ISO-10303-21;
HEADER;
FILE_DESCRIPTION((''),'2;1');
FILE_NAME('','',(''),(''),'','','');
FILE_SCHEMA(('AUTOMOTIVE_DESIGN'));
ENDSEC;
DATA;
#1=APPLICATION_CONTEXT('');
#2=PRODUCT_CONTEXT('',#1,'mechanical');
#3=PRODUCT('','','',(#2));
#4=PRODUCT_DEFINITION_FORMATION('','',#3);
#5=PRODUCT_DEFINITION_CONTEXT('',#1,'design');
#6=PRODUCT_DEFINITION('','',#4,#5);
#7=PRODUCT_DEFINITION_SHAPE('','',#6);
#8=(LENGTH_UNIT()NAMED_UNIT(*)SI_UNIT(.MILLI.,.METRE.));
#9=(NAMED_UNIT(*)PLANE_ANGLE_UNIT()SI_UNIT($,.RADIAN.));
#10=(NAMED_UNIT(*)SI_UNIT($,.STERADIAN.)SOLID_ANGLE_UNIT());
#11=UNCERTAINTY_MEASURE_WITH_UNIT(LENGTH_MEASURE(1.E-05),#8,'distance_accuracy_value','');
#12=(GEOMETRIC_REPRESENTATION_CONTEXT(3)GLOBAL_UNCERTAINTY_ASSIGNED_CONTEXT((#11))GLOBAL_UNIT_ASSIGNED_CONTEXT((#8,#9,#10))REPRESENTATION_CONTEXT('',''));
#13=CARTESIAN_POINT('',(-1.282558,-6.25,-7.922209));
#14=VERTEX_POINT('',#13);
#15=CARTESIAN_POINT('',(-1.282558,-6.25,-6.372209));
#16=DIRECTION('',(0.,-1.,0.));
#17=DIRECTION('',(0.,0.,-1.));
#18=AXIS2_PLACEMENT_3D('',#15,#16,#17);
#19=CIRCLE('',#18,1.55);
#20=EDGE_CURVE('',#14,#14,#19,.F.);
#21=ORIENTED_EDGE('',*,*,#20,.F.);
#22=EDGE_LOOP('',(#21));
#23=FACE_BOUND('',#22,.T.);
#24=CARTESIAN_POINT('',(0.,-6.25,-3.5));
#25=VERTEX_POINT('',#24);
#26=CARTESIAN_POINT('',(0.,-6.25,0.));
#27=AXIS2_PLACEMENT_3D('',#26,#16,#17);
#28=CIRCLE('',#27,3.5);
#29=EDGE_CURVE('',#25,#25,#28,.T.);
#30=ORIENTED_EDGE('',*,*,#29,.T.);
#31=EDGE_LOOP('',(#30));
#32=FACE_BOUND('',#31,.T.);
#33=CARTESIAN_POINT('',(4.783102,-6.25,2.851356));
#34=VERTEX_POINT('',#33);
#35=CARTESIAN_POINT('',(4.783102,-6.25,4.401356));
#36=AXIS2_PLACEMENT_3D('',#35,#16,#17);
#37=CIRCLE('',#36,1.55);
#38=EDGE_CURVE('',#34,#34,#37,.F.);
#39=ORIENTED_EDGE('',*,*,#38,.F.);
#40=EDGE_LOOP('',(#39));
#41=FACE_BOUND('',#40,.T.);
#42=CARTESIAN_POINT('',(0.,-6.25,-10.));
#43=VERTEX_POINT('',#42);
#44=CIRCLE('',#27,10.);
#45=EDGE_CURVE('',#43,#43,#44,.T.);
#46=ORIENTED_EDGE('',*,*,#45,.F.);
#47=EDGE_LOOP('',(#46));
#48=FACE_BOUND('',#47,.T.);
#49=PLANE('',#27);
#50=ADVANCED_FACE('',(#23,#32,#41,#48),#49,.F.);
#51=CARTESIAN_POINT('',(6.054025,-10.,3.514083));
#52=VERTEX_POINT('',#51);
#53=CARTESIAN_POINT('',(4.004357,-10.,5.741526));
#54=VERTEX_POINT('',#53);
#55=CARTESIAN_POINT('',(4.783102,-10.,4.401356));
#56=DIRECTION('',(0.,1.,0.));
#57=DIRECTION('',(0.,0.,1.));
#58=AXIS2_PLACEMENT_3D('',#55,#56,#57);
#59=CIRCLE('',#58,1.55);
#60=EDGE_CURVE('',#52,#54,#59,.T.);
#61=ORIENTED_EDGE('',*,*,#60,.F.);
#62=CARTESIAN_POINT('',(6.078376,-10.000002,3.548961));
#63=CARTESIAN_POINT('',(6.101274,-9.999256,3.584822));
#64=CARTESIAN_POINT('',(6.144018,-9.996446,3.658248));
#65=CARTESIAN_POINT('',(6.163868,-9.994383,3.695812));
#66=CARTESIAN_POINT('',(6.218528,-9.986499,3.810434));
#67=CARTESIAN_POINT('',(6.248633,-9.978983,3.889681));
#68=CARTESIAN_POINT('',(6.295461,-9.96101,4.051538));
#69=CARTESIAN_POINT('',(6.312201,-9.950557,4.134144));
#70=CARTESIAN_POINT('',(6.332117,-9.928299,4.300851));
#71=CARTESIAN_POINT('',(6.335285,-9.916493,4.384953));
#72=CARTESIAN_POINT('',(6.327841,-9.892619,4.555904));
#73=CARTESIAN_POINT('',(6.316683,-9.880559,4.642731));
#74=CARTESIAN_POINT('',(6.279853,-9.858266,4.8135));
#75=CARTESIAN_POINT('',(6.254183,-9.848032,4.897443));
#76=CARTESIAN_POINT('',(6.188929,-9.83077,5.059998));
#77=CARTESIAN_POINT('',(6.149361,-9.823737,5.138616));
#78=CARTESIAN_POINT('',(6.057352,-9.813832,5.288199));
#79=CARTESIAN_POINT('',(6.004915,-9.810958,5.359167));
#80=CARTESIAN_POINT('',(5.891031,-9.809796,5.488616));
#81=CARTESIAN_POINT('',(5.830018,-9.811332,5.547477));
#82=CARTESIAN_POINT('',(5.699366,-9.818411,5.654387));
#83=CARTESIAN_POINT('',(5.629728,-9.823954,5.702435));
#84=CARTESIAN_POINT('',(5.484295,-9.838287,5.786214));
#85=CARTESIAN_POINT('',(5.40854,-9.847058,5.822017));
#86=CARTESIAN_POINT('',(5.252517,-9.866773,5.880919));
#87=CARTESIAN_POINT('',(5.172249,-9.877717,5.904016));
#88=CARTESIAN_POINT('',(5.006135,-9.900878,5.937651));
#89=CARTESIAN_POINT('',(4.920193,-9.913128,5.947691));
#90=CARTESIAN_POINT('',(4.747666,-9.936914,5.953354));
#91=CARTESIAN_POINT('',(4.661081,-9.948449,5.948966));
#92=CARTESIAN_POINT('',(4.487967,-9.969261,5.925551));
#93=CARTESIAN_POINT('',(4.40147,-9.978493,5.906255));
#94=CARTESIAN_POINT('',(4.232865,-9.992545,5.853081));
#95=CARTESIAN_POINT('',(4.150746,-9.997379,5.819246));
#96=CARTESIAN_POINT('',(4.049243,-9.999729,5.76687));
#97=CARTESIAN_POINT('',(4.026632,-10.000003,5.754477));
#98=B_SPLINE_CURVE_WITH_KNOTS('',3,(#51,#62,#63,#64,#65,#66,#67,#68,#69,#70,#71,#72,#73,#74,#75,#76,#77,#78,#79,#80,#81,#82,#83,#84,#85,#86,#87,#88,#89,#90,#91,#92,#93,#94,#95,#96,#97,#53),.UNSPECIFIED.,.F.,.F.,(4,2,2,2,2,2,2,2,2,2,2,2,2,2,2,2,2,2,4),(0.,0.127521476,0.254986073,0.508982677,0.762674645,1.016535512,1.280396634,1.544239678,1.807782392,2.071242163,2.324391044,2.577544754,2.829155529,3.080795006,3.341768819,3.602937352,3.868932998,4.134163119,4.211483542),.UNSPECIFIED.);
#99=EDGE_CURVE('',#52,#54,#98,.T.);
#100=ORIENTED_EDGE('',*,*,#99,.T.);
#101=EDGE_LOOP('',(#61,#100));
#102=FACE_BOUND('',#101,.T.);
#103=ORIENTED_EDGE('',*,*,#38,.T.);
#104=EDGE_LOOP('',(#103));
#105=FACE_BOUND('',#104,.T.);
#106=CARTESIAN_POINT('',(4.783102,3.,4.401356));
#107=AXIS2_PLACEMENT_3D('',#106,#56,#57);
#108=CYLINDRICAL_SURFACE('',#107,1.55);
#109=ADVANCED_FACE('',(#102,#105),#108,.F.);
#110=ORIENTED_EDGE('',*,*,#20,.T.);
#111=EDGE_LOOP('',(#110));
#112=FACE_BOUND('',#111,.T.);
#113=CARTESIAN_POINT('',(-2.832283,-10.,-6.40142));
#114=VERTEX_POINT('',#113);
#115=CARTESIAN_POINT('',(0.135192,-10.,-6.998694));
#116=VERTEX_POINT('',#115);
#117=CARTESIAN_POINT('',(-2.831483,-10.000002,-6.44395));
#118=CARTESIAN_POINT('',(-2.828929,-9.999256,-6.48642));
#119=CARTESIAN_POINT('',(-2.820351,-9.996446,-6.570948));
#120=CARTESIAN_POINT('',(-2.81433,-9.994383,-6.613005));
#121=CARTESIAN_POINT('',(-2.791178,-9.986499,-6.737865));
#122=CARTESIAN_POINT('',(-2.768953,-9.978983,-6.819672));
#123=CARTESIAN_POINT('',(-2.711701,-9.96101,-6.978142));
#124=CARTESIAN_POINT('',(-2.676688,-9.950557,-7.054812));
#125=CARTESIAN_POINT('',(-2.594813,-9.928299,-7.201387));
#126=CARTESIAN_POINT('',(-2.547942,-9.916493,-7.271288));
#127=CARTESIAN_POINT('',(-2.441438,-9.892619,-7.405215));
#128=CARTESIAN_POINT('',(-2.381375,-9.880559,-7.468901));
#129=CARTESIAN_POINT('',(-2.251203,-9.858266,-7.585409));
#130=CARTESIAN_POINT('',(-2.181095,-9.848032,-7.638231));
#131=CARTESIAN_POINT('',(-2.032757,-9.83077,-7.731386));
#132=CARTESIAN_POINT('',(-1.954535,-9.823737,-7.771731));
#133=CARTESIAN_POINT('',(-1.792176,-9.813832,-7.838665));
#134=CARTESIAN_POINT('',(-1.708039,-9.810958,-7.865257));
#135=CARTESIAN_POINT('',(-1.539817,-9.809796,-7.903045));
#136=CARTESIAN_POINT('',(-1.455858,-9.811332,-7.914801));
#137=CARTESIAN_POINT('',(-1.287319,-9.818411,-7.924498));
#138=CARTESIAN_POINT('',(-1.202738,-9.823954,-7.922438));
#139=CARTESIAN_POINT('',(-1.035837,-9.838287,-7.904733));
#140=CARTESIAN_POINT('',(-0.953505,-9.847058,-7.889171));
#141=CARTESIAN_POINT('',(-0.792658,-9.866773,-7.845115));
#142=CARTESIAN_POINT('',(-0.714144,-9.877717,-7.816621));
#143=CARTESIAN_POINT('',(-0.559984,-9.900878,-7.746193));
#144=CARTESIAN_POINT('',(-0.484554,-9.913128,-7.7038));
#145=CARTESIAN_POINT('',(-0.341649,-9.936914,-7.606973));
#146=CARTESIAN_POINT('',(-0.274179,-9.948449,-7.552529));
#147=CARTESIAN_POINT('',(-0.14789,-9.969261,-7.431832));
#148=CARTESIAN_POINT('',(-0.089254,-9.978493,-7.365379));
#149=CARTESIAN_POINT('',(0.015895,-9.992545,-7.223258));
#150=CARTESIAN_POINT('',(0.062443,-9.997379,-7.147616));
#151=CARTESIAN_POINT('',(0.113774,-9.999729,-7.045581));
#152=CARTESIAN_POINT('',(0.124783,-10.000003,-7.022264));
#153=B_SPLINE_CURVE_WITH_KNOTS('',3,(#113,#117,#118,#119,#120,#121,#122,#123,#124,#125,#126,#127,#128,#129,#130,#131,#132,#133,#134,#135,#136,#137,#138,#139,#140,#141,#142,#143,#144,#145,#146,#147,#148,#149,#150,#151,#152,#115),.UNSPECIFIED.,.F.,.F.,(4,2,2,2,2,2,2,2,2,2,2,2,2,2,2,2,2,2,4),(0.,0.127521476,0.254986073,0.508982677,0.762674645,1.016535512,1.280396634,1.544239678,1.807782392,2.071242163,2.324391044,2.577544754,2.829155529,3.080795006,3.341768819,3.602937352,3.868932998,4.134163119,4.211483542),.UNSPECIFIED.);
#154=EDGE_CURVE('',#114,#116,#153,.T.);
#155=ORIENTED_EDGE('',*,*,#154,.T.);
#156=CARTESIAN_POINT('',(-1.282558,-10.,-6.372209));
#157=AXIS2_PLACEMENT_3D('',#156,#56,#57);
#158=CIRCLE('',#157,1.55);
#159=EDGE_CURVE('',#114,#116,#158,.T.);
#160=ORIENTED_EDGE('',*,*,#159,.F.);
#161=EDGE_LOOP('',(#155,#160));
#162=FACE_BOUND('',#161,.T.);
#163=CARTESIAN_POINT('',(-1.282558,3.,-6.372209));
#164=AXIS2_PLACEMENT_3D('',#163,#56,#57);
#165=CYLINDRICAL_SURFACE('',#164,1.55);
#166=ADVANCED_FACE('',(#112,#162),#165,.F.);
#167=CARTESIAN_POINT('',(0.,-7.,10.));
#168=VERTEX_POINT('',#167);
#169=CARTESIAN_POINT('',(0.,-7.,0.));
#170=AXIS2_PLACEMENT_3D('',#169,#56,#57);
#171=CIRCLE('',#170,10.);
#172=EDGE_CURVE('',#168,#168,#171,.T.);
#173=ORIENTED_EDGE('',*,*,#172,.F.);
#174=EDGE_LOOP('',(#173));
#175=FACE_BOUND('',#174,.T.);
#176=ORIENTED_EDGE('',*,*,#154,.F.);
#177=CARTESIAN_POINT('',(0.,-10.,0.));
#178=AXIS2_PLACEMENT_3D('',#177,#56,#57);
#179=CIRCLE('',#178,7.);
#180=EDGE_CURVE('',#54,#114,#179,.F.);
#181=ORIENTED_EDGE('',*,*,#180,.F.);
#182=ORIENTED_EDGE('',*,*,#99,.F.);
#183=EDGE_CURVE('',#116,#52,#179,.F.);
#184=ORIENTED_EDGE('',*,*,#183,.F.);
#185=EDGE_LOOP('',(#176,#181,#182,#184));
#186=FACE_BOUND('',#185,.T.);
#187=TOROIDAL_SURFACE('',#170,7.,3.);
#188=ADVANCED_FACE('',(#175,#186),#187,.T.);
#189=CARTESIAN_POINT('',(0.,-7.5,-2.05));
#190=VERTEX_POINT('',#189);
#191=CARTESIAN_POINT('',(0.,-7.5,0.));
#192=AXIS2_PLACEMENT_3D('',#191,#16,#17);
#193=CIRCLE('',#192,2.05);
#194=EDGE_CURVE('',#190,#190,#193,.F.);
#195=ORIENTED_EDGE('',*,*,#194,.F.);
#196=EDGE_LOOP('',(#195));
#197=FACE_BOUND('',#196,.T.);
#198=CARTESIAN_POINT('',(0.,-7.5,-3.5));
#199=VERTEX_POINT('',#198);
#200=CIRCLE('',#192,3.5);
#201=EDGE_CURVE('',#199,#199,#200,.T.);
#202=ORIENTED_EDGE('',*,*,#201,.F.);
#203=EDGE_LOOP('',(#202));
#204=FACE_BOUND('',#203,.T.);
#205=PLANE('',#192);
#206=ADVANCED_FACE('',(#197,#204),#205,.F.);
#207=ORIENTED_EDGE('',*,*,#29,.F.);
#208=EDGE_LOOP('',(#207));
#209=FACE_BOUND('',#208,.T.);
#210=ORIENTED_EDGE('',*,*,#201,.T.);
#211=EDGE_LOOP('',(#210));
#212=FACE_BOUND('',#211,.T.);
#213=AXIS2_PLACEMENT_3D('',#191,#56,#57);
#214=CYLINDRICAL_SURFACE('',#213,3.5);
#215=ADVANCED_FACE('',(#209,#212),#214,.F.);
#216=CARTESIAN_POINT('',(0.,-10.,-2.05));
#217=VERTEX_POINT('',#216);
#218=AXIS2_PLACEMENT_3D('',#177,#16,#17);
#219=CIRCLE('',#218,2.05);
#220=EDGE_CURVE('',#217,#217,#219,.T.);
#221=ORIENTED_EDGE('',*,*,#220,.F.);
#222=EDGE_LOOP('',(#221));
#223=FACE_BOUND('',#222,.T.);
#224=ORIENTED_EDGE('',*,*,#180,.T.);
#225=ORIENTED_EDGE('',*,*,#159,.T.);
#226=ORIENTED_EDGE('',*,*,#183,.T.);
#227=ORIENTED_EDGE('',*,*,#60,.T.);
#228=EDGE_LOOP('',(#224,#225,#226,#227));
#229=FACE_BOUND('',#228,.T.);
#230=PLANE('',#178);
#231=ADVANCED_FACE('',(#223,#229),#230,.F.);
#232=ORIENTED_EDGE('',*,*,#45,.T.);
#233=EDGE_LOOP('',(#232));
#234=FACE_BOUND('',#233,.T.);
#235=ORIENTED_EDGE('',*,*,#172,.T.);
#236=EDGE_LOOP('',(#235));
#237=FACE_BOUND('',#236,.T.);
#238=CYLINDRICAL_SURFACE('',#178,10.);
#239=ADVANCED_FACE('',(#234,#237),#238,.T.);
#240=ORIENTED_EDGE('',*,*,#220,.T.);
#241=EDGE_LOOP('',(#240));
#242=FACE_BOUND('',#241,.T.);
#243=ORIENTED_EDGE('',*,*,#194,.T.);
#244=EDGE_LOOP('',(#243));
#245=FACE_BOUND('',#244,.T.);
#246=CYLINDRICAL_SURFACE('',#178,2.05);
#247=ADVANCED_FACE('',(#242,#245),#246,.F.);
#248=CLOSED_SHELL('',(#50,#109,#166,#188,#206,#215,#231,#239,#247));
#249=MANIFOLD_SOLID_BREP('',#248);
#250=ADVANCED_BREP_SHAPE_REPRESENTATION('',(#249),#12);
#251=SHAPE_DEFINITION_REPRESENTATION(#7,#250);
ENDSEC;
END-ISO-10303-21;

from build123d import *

# Parameters (mm, degrees)
BOSS_EXTRUDE1_DEPTH        = 3
BOSS_EXTRUDE1_DEPTH_BACK   = 10
SKETCH1_R                  = 10
SKETCH4_R                  = 1.5
HOLE_DEPTH                 = 20.973741561
HOLECIR_COUNT              = 5
SKETCH6_R                  = 3.5
BEARINGHOLE_DEPTH          = 2.5
SKETCH7_R                  = 2.05
SHAFTHOLE_DEPTH            = 17.248076982
F_3_1_3_1_DIAMETER_HOLE1_D = 3.1
FILLET2_R                  = 3
SKETCH11_R                 = 10
CUT_EXTRUDE1_DEPTH         = 10


with BuildPart() as part:
    # Sketch1 → Boss-Extrude1 (new, two sides: drawn at the far end of the back side and taken through both)
    with BuildSketch(Plane(origin=(0, 0, 0), x_dir=(1, 0, 0), z_dir=(0, 1, 0)).offset(-BOSS_EXTRUDE1_DEPTH_BACK)):
        with Locations(Location((0, 0, 0), (0, 0, 270))):
            Circle(SKETCH1_R)
    extrude(amount=BOSS_EXTRUDE1_DEPTH + BOSS_EXTRUDE1_DEPTH_BACK)

    # Sketch4 → hole (cut, through all)
    with BuildSketch(Plane(origin=(-3.352872105, -1.093066116, 1.887711608), x_dir=(-0.4486862613641547, -0.14627571033740308, -0.8816371449912632), z_dir=(0.8382180262940947, 0.2732665289126682, -0.47192790187872385))):
        with Locations(Location((0, 0, 0), (0, 0, 8.746528197))):
            Circle(SKETCH4_R)
    hole = extrude(amount=-HOLE_DEPTH, mode=Mode.SUBTRACT)

    # holecir: hole ×5 about axis
    holecir_axis = Axis((0, 0, 0), (0, 1, 0))
    for i in range(1, HOLECIR_COUNT):
        add(hole.rotate(holecir_axis, i * 360 / HOLECIR_COUNT), mode=Mode.SUBTRACT)

    # Sketch6 → bearinghole (cut)
    with BuildSketch(Plane(origin=(0, -5, 0), x_dir=(-1, 0, 0), z_dir=(0, -1, 0))):
        with Locations(Location((0, 0, 0), (0, 0, 90))):
            Circle(SKETCH6_R)
    extrude(amount=BEARINGHOLE_DEPTH, mode=Mode.SUBTRACT)

    # Sketch7 → shafthole (cut, through all)
    with BuildSketch(Plane(origin=(0, -5, 0), x_dir=(-1, 0, 0), z_dir=(0, -1, 0))):
        with Locations(Location((0, 0, 0), (0, 0, 90))):
            Circle(SKETCH7_R)
    extrude(amount=SHAFTHOLE_DEPTH, mode=Mode.SUBTRACT)

    # Ø3.1 (3.1) Diameter Hole1 (through all)
    with Locations(Plane(origin=(0, 3, 0), x_dir=(1, 0, 0), z_dir=(0, 1, 0))):
        with Locations((-1.282558474, 6.372208703), (4.783101903, -4.401356176)):
            Hole(F_3_1_3_1_DIAMETER_HOLE1_D / 2)

    # Fillet2
    # the kernel refuses this fillet: 3 mm, written as the material it takes off along each edge
    with BuildSketch(Plane(origin=(0, 3, 0), x_dir=(0, 0, 1), z_dir=(-1, 0, 0))) as fillet2_piece_1:
        with BuildLine():
            CenterArc((10 - FILLET2_R, -FILLET2_R), FILLET2_R, 0, 90)
            Line((10 - FILLET2_R, 0), (10, 0))
            Line((10, 0), (10, -FILLET2_R))
        make_face()
    revolve(axis=Axis((0, 3, 0), (0, 1, 0)), mode=Mode.SUBTRACT)
    with BuildSketch(Plane(origin=(0, -10, 0), x_dir=(0, 0, 1), z_dir=(-1, 0, 0))) as fillet2_piece_2:
        with BuildLine():
            CenterArc((10 - FILLET2_R, FILLET2_R), FILLET2_R, 270, 90)
            Line((10 - FILLET2_R, 0), (10, 0))
            Line((10, 0), (10, FILLET2_R))
        make_face()
    revolve(axis=Axis((0, -10, 0), (0, 1, 0)), mode=Mode.SUBTRACT)

    # Sketch11 → Cut-Extrude1 (cut)
    with BuildSketch(Plane(origin=(0, -6.25, 0), x_dir=(-1, 0, 0), z_dir=(0, -1, 0))):
        with Locations(Location((0, 0, 0), (0, 0, 270))):
            Circle(SKETCH11_R)
    extrude(amount=-CUT_EXTRUDE1_DEPTH, mode=Mode.SUBTRACT)


solid = part.part
